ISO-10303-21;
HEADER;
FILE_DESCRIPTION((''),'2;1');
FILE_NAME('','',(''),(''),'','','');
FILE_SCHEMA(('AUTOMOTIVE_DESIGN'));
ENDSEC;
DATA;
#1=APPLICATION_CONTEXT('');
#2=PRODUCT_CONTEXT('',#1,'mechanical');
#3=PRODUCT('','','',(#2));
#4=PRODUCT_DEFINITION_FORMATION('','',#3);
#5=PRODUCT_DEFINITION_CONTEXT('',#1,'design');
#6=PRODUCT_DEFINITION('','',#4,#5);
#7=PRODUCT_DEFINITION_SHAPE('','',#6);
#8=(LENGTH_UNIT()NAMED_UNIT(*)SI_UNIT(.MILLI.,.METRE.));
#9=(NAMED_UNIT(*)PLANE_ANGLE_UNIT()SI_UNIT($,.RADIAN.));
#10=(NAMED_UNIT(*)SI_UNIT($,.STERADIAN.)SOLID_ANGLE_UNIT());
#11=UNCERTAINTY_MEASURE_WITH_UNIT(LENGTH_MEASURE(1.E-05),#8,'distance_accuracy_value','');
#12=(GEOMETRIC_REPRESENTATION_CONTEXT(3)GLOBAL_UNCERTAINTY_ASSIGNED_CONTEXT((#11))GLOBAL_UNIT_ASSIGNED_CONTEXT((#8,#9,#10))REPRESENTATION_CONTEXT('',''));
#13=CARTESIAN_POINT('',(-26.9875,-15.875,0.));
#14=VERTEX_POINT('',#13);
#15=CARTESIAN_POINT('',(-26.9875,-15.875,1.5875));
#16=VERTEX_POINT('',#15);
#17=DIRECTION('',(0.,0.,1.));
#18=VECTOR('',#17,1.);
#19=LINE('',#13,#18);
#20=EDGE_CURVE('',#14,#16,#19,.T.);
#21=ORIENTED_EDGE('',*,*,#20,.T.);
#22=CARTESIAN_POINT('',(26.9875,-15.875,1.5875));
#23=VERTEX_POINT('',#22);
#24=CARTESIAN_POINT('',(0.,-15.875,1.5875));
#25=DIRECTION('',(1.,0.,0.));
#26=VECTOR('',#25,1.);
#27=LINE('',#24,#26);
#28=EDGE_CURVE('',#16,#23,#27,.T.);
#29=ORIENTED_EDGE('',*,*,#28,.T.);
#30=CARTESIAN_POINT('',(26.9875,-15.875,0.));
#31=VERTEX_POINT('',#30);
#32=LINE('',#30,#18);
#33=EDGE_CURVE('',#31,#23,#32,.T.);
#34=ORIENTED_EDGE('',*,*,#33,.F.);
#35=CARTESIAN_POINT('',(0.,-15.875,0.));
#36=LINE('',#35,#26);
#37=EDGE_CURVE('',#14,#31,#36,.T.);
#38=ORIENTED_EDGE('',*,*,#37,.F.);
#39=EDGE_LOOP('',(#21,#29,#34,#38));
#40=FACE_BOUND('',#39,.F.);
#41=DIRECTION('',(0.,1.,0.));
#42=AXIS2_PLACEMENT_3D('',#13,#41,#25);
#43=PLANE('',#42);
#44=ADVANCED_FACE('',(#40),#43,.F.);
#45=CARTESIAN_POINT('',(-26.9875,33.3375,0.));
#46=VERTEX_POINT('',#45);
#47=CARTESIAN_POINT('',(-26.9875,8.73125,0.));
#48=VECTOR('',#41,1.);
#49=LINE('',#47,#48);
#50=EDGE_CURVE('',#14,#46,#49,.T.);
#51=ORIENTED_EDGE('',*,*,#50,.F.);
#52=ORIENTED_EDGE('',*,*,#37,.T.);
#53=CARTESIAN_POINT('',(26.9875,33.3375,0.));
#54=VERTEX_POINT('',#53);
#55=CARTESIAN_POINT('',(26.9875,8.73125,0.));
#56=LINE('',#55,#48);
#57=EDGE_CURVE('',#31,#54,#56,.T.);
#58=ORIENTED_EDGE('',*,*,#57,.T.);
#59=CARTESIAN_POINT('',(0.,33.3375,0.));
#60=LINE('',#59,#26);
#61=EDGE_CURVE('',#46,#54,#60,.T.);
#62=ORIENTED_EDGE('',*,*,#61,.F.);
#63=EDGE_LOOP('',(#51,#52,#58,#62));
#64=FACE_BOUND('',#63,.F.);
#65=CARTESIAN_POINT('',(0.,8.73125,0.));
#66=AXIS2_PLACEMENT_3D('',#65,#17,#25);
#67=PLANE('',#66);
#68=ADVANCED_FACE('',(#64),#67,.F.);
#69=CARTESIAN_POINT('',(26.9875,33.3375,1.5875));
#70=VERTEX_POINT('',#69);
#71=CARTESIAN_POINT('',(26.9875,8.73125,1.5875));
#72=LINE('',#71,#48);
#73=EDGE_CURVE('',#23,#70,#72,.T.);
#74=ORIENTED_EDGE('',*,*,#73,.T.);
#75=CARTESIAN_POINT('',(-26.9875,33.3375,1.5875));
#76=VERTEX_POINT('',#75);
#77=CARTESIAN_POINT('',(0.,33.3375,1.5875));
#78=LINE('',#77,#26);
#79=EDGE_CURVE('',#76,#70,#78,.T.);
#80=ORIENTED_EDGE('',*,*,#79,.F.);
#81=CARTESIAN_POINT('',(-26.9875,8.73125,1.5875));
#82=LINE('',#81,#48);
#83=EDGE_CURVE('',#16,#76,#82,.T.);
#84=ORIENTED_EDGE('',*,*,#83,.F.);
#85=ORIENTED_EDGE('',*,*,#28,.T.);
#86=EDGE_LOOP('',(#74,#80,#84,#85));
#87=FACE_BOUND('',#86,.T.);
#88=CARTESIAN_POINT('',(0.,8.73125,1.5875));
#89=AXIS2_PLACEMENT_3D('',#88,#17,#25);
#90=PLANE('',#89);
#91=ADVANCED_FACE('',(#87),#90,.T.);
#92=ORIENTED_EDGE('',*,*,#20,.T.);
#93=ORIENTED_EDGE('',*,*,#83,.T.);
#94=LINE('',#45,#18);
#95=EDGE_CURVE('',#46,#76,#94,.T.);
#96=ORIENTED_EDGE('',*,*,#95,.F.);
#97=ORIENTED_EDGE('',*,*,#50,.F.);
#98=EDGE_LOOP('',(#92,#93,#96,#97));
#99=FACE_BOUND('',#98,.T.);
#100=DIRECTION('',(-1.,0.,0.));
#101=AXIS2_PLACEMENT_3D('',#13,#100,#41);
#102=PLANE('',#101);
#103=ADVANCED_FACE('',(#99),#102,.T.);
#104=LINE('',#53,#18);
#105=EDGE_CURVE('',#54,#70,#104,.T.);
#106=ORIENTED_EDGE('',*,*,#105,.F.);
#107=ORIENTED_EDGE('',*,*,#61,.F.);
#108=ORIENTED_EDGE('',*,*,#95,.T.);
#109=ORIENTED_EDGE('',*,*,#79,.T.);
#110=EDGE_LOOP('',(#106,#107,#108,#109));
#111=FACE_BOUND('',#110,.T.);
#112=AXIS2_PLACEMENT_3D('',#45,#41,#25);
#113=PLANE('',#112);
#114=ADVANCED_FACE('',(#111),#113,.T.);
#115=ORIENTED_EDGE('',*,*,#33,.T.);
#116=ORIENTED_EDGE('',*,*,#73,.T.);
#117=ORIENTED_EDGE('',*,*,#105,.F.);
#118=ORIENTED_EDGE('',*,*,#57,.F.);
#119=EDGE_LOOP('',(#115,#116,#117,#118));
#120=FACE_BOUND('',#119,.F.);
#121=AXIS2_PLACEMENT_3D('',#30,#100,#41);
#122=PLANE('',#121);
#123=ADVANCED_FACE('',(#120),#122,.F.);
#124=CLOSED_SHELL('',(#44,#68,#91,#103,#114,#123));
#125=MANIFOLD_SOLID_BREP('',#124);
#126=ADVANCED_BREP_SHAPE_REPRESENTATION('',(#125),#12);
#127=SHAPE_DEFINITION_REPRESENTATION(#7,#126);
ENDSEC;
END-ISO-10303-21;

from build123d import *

# Parameters (mm, degrees)
F0_W     = 53.975
F0_H     = 49.2125
F1_DEPTH = 1.5875


# Not quite as in the source:
# - a feature of the source that left no trace in its solid (it failed there, or was rolled back) is left out


with BuildPart() as f1:
    # F0 (on Top) → F1 (new body)
    with BuildSketch(Plane.XY):
        with Locations((0, 8.73125)):
            Rectangle(F0_W, F0_H)
    extrude(amount=F1_DEPTH)


solid = f1.part
